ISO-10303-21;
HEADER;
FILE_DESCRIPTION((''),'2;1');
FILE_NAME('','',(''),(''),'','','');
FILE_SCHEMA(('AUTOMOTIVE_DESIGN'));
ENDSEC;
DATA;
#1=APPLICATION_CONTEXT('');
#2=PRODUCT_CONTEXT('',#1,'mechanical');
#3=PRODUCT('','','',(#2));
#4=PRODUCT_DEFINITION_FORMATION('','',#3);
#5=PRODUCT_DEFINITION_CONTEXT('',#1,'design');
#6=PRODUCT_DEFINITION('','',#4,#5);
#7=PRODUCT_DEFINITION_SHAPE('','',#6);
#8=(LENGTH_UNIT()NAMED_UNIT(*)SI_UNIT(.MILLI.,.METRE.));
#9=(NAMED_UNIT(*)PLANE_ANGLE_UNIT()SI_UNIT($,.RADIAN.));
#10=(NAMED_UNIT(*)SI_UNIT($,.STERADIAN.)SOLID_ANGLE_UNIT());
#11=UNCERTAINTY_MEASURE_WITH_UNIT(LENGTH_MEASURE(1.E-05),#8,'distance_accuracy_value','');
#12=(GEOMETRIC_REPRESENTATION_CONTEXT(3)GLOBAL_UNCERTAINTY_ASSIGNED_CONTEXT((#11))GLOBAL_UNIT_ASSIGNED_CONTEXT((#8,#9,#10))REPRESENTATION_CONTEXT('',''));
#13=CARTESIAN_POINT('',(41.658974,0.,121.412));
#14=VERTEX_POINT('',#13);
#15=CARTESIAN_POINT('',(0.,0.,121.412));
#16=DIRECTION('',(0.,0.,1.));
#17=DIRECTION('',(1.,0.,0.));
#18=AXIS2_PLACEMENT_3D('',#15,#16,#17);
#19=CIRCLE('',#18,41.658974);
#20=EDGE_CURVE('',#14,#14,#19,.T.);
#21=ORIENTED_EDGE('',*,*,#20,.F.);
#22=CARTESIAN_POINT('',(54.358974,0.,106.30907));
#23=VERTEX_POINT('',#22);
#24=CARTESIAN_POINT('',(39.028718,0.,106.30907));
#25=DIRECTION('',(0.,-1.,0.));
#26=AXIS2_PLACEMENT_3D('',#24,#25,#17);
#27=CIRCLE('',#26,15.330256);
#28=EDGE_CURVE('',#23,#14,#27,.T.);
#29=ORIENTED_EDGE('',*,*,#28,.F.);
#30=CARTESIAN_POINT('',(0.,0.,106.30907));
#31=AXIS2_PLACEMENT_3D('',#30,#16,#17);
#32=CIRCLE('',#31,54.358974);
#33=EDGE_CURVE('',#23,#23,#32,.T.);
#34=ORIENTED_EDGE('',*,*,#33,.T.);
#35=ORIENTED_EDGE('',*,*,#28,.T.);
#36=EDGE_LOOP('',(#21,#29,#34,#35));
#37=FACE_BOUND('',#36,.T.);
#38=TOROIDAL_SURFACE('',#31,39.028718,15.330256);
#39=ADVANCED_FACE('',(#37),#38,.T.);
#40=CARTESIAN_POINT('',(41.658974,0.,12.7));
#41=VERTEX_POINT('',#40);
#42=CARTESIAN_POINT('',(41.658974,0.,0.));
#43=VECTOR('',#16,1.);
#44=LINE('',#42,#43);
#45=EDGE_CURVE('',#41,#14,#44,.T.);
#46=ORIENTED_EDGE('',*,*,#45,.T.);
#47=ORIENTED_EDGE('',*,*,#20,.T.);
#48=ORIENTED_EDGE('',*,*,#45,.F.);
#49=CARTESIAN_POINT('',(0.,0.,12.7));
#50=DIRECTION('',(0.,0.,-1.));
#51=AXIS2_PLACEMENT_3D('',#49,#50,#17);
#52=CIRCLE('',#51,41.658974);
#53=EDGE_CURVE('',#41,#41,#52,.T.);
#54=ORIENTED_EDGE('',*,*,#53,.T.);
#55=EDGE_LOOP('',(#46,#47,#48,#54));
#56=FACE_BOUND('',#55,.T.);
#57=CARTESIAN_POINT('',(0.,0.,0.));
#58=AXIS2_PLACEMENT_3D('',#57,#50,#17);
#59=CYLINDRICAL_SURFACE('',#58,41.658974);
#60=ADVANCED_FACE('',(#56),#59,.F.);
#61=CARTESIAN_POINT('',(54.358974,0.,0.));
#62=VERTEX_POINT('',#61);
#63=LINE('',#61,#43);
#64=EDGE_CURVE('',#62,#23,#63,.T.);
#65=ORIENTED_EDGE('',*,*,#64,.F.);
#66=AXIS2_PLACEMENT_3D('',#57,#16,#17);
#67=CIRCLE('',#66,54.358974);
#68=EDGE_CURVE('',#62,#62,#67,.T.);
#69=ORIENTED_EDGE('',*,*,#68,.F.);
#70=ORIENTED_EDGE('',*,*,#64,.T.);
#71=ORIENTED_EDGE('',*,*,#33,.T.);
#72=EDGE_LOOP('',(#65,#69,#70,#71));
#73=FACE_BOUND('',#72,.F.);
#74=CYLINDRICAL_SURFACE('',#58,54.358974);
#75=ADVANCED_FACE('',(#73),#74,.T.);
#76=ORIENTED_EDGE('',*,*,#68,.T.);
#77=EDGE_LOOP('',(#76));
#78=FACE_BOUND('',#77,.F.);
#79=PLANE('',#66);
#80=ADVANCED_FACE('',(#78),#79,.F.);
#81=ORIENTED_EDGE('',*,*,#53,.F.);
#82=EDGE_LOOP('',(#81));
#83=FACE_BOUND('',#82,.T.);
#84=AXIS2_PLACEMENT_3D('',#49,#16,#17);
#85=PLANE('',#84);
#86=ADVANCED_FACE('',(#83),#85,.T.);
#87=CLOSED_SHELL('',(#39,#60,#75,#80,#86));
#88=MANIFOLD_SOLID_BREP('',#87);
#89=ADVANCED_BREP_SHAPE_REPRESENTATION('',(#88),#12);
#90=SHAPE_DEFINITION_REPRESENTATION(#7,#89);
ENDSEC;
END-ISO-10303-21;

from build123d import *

# Parameters (mm, degrees)
F0_R     = 54.3589736978
F1_DEPTH = 121.412
F2_T     = -12.7


# Not quite as in the source:
# - a fillet or chamfer that OpenCascade refuses, or shapes differently, is made with other operations: its cross-section is extruded or revolved along the edge and cut away or added


with BuildPart() as f1:
    # F0 (on Top) → F1 (new body)
    with BuildSketch(Plane.XY):
        Circle(F0_R)
    extrude(amount=F1_DEPTH)

    # F2
    f2_openings = [f1.faces().sort_by_distance(p)[0] for p in [
        (0, 0, 121.412),
    ]]
    offset(amount=F2_T, openings=f2_openings)

    # F3: fillet of radius 15.3302561211 on 1 edges, made by hand

    # F3_s1 → F3_t2 (revolve, cut)
    with BuildSketch(Plane.XZ):
        with BuildLine():
            ThreePointArc((54.3589736978, 106.3090696395), (50.7619876396, 116.1755343746), (41.6589736978, 121.412))
            Line((41.6589736978, 121.412), (54.3589736978, 121.412))
            Line((54.3589736978, 121.412), (54.3589736978, 106.3090696395))
        make_face()
    revolve(axis=Axis((0, 0, 121.412), (0, 0, 1)), mode=Mode.SUBTRACT)


solid = f1.part
